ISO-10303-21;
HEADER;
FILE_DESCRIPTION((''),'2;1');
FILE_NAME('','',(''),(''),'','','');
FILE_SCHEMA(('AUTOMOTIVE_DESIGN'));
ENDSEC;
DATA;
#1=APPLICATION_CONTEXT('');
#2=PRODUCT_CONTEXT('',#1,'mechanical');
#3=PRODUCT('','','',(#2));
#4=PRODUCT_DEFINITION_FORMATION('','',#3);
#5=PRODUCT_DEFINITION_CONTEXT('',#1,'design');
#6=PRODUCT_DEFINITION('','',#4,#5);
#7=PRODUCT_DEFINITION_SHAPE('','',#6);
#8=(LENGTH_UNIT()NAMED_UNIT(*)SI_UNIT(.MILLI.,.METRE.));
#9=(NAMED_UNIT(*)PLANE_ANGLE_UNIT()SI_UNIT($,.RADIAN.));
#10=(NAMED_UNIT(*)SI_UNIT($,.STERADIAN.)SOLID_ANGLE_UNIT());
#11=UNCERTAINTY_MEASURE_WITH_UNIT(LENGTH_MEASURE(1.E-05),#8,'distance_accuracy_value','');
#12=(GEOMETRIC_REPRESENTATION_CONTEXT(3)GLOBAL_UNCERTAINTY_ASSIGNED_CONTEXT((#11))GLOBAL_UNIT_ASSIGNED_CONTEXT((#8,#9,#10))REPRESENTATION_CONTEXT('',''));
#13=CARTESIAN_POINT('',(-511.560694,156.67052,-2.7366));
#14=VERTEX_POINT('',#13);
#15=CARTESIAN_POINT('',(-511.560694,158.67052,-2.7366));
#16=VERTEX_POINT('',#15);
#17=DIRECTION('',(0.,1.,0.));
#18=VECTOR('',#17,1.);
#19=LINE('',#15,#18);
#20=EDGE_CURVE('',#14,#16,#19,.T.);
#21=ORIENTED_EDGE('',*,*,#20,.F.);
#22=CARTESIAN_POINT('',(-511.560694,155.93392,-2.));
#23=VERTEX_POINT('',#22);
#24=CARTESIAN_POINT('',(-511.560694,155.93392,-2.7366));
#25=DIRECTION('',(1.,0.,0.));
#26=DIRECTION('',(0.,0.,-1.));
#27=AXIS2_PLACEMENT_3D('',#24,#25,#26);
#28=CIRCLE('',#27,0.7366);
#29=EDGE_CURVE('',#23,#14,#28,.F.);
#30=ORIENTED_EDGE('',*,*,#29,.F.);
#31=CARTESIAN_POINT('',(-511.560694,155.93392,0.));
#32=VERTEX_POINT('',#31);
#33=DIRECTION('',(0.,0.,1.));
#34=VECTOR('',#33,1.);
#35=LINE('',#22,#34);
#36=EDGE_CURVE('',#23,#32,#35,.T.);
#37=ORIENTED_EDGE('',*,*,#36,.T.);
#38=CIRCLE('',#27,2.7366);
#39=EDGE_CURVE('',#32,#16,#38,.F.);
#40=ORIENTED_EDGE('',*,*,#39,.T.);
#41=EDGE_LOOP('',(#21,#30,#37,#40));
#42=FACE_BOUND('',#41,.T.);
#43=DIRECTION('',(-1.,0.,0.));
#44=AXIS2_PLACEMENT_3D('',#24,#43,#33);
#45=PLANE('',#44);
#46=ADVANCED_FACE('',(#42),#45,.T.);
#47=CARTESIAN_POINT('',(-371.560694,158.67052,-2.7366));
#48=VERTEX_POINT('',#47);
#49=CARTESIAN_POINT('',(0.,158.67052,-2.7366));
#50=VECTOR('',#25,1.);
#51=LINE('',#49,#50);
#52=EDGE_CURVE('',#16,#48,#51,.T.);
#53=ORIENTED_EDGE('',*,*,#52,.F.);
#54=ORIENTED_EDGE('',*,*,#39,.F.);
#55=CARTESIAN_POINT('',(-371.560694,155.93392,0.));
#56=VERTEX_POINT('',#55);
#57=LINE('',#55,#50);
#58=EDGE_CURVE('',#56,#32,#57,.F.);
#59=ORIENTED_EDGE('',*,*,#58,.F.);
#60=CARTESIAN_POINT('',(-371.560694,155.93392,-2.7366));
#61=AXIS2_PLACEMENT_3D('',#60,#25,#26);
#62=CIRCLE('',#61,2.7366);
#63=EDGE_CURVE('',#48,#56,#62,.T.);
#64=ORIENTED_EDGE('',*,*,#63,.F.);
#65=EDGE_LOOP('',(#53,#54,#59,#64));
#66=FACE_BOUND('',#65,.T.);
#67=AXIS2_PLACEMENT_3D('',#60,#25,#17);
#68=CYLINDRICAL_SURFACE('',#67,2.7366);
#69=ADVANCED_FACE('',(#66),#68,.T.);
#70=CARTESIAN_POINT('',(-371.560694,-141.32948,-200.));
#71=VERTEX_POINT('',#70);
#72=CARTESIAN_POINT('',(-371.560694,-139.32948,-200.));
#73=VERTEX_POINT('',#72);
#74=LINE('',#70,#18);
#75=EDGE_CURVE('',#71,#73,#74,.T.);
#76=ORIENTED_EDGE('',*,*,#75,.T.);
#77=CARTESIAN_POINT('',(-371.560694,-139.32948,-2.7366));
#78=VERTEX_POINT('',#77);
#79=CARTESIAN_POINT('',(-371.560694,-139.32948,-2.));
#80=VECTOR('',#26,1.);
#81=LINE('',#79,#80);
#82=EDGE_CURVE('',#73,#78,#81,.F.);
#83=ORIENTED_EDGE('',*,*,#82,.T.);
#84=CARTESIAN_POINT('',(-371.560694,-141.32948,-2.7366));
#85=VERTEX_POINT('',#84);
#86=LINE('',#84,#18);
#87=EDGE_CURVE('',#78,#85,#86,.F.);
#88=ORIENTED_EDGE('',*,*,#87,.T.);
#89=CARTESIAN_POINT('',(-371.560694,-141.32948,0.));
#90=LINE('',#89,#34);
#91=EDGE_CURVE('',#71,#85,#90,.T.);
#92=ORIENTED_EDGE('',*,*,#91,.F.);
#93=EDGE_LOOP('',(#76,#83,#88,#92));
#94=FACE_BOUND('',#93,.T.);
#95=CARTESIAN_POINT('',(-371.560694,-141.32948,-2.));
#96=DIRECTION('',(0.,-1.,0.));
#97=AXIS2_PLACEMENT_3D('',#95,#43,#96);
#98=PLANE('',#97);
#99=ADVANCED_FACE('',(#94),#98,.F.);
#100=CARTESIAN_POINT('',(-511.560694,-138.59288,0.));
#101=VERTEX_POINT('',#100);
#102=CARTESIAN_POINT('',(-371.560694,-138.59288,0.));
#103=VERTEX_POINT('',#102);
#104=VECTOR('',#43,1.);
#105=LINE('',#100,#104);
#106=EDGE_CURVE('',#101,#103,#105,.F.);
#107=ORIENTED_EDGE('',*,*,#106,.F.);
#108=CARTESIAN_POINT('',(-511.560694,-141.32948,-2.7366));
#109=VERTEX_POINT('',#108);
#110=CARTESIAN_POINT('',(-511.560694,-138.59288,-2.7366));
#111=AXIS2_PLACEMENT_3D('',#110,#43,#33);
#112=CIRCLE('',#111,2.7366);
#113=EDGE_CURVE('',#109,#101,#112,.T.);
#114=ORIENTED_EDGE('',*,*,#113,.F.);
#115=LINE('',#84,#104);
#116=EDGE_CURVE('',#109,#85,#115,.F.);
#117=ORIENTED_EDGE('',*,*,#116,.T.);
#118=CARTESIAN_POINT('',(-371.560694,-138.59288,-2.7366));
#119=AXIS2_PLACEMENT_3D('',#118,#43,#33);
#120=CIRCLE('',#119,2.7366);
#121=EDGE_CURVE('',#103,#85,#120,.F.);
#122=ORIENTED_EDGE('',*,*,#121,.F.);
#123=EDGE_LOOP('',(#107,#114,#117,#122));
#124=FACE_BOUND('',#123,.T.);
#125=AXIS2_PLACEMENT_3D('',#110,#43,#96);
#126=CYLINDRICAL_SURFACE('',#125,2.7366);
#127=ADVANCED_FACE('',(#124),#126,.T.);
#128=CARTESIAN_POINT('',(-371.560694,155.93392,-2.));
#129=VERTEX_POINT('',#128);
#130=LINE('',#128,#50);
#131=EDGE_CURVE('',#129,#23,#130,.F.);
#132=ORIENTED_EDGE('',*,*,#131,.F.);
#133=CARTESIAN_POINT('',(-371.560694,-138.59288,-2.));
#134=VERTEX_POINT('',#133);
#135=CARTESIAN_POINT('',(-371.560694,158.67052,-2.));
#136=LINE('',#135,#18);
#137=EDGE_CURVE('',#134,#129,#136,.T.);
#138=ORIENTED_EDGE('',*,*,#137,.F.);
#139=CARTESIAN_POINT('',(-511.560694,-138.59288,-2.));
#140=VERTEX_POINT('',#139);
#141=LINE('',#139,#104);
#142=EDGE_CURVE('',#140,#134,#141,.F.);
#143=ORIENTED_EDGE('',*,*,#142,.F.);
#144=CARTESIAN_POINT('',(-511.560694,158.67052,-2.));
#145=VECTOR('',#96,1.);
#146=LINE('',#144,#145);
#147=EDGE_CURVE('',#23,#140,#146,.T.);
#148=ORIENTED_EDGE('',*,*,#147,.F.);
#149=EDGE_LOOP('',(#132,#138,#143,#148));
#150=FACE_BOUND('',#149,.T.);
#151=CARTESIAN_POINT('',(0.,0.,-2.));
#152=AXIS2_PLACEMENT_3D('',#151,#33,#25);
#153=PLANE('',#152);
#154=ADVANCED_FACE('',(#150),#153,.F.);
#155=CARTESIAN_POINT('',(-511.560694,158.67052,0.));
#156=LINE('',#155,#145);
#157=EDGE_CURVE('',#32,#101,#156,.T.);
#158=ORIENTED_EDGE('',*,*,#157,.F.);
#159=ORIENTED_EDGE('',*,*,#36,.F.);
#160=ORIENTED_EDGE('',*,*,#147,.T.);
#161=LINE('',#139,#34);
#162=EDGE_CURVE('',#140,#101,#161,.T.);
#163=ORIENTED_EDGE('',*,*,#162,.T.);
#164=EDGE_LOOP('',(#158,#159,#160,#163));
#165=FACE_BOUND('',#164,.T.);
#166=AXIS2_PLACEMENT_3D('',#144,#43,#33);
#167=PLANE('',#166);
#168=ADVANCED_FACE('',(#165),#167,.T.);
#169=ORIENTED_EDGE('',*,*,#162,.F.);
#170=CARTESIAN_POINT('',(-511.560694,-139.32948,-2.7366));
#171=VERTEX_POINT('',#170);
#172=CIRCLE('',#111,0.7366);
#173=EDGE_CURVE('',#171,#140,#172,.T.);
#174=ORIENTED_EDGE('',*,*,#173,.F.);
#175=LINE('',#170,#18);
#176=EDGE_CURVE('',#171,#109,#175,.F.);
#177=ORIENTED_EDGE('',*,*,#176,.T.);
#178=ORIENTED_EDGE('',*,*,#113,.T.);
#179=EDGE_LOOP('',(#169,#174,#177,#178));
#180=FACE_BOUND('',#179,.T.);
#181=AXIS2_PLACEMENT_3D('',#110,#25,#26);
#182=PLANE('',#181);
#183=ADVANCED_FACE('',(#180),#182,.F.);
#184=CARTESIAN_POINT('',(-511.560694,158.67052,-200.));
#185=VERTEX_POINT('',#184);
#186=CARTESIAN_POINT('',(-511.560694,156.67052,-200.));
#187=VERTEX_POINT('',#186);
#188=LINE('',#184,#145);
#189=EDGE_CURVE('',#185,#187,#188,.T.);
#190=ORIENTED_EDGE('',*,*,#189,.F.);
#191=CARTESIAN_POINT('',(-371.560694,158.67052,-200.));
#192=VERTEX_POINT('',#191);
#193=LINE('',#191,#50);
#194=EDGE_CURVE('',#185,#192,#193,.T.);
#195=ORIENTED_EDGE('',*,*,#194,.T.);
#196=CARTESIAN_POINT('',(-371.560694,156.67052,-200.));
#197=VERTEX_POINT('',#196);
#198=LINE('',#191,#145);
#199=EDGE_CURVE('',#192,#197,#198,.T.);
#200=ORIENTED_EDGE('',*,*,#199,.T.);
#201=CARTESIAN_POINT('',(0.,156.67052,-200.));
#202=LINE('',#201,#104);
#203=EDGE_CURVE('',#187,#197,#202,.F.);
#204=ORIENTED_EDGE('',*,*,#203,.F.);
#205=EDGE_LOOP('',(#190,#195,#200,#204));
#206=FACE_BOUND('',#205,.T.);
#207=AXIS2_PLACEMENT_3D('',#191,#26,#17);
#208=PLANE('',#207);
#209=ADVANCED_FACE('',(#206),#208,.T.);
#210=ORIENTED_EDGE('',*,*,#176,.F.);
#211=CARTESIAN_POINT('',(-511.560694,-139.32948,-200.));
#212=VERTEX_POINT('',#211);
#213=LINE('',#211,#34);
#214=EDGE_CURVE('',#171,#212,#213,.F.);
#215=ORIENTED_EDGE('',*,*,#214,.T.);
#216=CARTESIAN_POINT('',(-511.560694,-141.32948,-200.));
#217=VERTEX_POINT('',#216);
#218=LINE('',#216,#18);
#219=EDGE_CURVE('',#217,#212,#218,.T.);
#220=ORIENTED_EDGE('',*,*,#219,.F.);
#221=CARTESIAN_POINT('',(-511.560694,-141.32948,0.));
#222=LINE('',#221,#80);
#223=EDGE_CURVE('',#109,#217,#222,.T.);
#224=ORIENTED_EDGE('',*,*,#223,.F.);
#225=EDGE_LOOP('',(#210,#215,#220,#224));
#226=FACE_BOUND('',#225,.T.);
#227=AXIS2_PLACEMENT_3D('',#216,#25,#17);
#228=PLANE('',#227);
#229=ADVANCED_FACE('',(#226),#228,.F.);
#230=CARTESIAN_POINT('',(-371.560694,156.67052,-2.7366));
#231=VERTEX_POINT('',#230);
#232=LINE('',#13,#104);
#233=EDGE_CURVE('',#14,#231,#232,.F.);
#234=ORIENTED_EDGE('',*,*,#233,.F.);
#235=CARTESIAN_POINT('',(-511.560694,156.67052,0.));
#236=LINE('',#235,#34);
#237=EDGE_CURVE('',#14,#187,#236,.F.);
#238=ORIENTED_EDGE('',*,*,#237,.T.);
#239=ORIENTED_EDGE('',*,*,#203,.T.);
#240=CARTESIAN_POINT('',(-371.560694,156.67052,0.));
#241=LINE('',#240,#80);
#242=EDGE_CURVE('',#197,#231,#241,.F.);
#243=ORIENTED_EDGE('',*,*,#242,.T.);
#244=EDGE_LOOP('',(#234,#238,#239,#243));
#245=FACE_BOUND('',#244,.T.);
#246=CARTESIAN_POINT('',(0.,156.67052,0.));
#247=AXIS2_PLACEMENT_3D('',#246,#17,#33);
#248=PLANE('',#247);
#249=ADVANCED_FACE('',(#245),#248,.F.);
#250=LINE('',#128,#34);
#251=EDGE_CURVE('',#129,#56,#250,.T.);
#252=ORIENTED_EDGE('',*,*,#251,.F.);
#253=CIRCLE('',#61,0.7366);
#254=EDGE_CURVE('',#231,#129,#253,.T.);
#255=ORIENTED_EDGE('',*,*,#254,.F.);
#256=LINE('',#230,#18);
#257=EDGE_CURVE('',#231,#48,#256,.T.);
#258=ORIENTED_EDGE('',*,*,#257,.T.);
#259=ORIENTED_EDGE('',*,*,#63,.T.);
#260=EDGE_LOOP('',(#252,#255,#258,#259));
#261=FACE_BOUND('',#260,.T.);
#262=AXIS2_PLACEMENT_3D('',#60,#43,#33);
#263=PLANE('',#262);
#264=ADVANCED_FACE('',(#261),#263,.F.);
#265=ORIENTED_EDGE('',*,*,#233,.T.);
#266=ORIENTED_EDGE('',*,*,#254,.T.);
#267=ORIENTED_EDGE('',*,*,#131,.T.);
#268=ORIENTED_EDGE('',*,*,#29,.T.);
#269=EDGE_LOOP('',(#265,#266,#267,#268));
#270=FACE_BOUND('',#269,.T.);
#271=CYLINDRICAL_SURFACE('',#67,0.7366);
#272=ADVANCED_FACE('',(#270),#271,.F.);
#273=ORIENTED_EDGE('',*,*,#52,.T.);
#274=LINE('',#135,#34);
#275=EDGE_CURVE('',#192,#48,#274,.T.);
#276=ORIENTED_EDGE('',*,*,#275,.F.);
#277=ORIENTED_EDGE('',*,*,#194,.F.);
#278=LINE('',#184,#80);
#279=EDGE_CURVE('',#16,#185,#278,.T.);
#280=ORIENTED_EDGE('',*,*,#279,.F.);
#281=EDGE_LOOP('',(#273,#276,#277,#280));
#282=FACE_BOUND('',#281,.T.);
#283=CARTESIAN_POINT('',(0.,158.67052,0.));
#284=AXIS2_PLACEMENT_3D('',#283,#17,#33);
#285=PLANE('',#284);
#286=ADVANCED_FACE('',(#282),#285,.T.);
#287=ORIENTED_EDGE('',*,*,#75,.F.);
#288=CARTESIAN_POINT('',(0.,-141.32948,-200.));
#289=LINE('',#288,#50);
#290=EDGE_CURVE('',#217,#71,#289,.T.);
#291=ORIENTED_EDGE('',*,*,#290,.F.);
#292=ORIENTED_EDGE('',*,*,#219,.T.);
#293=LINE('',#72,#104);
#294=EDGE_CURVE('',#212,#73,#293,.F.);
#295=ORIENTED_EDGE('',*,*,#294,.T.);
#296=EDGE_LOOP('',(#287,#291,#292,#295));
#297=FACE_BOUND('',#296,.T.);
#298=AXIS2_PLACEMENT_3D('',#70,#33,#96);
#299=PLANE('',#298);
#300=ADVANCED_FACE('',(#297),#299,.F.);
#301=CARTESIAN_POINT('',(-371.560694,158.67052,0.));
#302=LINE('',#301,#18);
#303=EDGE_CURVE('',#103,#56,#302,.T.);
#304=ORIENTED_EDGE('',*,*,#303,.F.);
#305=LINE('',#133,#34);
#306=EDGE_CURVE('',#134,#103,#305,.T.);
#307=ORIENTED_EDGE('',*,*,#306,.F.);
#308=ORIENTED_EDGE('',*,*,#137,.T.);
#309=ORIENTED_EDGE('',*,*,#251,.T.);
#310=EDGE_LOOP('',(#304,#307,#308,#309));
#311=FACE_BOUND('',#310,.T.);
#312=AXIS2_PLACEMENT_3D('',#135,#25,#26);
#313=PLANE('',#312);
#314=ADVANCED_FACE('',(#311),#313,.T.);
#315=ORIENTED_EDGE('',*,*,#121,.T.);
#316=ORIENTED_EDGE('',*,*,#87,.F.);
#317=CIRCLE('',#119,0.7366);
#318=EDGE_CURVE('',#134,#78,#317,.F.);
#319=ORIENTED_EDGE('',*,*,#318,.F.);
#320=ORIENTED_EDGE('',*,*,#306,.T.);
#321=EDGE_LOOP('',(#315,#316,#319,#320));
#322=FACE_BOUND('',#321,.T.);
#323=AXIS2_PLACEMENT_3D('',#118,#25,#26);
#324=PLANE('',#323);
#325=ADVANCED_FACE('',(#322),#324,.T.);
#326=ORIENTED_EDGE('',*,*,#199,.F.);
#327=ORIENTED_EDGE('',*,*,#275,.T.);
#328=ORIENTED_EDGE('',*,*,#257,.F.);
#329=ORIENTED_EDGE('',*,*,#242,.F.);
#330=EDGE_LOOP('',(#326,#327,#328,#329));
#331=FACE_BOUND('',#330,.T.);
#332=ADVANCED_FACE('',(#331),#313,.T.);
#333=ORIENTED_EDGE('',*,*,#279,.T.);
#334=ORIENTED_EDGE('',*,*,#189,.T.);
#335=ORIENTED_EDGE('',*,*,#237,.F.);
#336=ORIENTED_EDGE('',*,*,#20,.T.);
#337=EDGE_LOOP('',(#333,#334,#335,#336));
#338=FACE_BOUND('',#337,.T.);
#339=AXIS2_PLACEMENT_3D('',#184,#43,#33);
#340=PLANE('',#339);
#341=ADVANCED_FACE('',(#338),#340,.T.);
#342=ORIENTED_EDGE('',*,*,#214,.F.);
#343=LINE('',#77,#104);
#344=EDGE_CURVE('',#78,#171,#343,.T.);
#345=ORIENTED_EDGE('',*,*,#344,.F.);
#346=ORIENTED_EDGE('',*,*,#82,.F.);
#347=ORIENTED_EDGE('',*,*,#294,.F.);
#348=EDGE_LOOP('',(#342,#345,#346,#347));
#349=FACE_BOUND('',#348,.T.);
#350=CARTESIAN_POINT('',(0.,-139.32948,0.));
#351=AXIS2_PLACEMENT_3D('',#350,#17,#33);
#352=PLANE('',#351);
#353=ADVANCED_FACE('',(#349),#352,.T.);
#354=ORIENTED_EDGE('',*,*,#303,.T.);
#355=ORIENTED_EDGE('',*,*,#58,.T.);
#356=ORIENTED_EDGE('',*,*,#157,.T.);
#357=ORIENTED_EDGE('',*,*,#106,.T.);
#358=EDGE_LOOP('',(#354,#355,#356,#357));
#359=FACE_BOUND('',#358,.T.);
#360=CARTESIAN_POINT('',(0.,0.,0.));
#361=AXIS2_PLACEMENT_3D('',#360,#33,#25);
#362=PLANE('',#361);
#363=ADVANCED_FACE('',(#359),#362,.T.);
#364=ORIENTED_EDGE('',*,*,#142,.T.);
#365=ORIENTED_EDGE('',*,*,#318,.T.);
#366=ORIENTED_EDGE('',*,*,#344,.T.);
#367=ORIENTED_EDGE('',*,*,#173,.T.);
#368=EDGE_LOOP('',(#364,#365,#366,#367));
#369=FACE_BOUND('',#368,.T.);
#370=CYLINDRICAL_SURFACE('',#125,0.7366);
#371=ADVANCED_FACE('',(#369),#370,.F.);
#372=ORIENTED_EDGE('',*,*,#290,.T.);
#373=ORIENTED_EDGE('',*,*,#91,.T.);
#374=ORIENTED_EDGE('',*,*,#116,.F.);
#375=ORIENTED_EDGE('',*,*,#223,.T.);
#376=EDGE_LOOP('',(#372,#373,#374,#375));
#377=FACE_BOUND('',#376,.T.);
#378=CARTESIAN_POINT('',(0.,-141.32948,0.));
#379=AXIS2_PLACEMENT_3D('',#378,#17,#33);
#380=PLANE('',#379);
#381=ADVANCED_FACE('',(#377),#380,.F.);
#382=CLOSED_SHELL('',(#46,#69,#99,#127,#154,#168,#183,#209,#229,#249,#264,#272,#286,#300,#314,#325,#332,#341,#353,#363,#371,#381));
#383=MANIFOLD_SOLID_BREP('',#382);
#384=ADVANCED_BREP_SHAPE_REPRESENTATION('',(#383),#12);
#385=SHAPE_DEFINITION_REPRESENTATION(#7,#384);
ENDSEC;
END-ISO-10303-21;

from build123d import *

# Parameters (mm, degrees)
SKETCH1_W                    = 140
SKETCH1_H                    = 300
BASE_FLANGE1_DEPTH           = 2
EDGE_FLANGE1_STRIP_W         = 9.4732
EDGE_FLANGE1_STRIP_H         = 2
EDGE_FLANGE1_STRIP_CUT_DEPTH = 140
EDGE_FLANGE1_DEPTH           = 140
EDGE_FLANGE2_STRIP_W         = 9.4732
EDGE_FLANGE2_STRIP_H         = 2
EDGE_FLANGE2_STRIP_CUT_DEPTH = 140
EDGE_FLANGE2_DEPTH           = 140


# Sheet-metal steps are written as plain solids
with BuildPart() as part:
    # Sketch1 → Base-Flange1 (new body)
    with BuildSketch(Plane.XY):
        with Locations((-441.560693642, 8.670520231)):
            Rectangle(SKETCH1_W, SKETCH1_H)
    extrude(amount=-BASE_FLANGE1_DEPTH)

    # Edge-Flange1 strip (across the edge) → Edge-Flange1 strip cut (cut)
    with BuildSketch(Plane(origin=(-511.560693642, 158.670520231, -2), x_dir=(0, -1, 0), z_dir=(1, 0, 0))):
        with Locations((-2, -1)):
            Rectangle(EDGE_FLANGE1_STRIP_W, EDGE_FLANGE1_STRIP_H)
    extrude(amount=EDGE_FLANGE1_STRIP_CUT_DEPTH, mode=Mode.SUBTRACT)

    # Edge-Flange1 section (across the edge) → Edge-Flange1 (add)
    with BuildSketch(Plane(origin=(-511.560693642, 158.670520231, -2), x_dir=(0, -1, 0), z_dir=(1, 0, 0))):
        with BuildLine():
            Line((0, 0.7366), (0, 198))
            Line((0, 198), (2, 198))
            Line((2, 198), (2, 0.7366))
            ThreePointArc((2, 0.7366), (2.215745145, 0.215745145), (2.7366, 0))
            Line((2.7366, 0), (2.7366, -2))
            ThreePointArc((2.7366, -2), (0.801531583, -1.198468417), (0, 0.7366))
        make_face()
    extrude(amount=EDGE_FLANGE1_DEPTH)

    # Edge-Flange2 strip (across the edge) → Edge-Flange2 strip cut (cut)
    with BuildSketch(Plane(origin=(-371.560693642, -141.329479769, -2), x_dir=(0, 1, 0), z_dir=(-1, 0, 0))):
        with Locations((-2, -1)):
            Rectangle(EDGE_FLANGE2_STRIP_W, EDGE_FLANGE2_STRIP_H)
    extrude(amount=EDGE_FLANGE2_STRIP_CUT_DEPTH, mode=Mode.SUBTRACT)

    # Edge-Flange2 section (across the edge) → Edge-Flange2 (add)
    with BuildSketch(Plane(origin=(-371.560693642, -141.329479769, -2), x_dir=(0, 1, 0), z_dir=(-1, 0, 0))):
        with BuildLine():
            Line((0, 0.7366), (0, 198))
            Line((0, 198), (2, 198))
            Line((2, 198), (2, 0.7366))
            ThreePointArc((2, 0.7366), (2.215745145, 0.215745145), (2.7366, 0))
            Line((2.7366, 0), (2.7366, -2))
            ThreePointArc((2.7366, -2), (0.801531583, -1.198468417), (0, 0.7366))
        make_face()
    extrude(amount=EDGE_FLANGE2_DEPTH)


solid = part.part
